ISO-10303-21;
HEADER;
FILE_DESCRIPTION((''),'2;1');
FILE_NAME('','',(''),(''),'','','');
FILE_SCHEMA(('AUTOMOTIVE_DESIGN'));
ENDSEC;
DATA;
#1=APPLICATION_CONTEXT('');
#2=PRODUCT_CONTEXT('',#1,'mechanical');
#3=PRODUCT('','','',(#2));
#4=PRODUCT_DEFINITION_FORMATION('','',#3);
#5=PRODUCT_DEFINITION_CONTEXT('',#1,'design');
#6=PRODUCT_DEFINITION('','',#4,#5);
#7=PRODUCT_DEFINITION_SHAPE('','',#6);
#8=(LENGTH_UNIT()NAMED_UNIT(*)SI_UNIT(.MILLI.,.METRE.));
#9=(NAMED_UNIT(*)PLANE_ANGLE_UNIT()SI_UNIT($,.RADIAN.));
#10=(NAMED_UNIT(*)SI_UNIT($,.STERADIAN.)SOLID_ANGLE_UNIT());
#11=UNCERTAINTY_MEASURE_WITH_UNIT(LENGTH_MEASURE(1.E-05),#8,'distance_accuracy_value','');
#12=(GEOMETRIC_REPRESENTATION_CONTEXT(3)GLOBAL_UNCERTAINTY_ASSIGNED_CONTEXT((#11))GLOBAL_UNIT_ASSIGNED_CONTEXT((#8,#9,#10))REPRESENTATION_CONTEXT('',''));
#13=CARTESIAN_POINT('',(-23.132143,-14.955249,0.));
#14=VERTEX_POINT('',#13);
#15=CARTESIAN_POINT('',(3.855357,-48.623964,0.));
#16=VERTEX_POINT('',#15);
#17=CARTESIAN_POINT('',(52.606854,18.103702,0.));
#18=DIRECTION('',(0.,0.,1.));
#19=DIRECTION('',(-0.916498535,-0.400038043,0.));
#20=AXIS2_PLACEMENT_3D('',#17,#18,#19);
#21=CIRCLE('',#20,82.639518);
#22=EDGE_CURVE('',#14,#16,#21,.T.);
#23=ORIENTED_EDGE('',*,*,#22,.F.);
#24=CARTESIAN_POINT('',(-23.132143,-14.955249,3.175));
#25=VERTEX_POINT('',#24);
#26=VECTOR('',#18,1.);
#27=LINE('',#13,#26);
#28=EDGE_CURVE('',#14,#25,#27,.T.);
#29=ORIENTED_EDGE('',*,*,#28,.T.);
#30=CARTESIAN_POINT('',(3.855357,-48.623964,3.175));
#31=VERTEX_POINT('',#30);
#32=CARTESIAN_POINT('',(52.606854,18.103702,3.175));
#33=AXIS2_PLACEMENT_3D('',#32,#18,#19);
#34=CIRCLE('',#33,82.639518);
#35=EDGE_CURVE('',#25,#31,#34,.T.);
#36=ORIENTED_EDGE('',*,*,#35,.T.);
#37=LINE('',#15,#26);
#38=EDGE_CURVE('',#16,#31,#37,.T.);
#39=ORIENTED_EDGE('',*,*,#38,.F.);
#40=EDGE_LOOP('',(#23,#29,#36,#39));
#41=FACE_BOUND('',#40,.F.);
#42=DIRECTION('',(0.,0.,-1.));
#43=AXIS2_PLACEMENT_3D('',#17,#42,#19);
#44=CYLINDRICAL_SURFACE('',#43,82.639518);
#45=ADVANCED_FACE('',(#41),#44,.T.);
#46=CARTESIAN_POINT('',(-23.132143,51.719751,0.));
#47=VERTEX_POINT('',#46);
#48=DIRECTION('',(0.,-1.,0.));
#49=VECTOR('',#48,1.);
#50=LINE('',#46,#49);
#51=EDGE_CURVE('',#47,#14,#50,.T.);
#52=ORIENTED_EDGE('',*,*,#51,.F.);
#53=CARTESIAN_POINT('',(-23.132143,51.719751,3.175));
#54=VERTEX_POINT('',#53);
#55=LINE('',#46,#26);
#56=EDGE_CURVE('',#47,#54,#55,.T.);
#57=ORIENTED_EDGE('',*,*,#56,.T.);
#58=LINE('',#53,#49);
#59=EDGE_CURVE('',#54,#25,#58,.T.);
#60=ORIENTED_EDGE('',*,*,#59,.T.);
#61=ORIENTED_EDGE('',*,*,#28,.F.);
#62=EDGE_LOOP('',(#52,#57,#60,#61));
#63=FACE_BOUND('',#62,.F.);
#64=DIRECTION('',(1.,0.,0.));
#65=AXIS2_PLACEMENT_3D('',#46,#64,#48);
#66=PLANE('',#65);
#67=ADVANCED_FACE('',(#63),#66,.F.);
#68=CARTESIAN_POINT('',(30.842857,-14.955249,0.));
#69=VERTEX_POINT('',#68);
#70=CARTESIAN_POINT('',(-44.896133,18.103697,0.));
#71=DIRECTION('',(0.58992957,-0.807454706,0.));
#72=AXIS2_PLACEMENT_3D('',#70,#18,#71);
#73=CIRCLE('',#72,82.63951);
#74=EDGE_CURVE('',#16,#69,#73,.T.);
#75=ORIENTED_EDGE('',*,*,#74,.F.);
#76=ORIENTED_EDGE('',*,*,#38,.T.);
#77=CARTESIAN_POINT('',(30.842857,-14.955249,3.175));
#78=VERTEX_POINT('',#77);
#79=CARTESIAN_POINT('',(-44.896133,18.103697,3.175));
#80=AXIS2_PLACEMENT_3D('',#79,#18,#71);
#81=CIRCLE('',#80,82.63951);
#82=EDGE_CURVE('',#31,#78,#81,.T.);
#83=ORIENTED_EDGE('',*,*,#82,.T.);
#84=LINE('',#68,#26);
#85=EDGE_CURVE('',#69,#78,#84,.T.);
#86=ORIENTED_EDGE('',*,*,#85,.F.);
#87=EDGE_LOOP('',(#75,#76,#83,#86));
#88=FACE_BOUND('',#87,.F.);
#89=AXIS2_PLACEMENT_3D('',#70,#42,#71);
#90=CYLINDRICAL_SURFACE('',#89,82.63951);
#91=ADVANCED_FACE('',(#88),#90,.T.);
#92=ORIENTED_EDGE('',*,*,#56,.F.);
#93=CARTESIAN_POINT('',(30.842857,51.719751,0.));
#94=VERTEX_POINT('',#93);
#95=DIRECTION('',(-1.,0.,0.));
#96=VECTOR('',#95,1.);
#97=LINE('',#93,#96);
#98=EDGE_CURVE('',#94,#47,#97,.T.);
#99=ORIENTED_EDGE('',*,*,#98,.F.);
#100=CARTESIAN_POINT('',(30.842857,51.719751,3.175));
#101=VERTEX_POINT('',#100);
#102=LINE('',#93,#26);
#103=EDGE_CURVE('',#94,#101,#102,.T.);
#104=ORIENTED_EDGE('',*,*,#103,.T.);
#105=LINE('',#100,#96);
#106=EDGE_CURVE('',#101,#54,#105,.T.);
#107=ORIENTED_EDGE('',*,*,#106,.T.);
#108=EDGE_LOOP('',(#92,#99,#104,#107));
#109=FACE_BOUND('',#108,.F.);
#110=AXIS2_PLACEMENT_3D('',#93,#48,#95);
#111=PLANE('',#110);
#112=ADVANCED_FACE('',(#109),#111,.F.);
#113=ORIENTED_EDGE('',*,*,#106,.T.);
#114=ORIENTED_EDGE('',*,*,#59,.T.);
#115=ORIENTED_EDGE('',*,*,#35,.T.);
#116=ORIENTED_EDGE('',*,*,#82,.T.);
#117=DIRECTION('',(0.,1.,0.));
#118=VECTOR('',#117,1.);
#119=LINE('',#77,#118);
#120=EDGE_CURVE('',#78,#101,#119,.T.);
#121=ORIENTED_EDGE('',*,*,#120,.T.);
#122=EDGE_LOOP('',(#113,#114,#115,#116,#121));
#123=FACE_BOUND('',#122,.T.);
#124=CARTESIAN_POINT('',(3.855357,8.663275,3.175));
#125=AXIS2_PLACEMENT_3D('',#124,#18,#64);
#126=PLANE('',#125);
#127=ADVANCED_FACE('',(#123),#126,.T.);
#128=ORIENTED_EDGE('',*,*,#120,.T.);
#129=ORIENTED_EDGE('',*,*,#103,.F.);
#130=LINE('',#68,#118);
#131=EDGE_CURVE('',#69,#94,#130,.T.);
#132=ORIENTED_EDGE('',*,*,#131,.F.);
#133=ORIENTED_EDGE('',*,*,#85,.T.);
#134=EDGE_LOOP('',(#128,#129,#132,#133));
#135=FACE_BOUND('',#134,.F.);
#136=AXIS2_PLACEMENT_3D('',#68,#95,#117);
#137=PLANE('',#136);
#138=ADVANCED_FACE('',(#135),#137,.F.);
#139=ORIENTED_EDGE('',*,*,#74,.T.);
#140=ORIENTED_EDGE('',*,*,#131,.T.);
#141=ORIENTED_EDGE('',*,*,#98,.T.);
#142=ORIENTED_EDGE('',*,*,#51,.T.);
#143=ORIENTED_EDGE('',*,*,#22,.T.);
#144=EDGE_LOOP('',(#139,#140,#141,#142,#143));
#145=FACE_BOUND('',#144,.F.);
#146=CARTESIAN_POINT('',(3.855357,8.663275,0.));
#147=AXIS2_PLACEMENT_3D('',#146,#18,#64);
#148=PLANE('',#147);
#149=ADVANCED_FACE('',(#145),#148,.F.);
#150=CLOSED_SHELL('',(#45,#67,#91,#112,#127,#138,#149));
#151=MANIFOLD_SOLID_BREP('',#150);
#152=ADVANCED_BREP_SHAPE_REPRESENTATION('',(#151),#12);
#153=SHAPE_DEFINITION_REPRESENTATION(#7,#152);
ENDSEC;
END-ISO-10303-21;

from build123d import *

# Parameters (mm, degrees)
F1_DEPTH = 3.175


# Not quite as in the source:
# - a length typed as a fraction of an inch, garbled in the dataset ("3 / 203.2 mm" for 3/8 in), is restored


with BuildPart() as f1:
    # F0 (on Top) → F1 (new body)
    with BuildSketch(Plane.XY):
        with BuildLine():
            Line((30.8428571429, 51.7197510952), (-23.1321428571, 51.7197510952))
            Line((-23.1321428571, 51.7197510952), (-23.1321428571, -14.9552489048))
            ThreePointArc((-23.1321428571, -14.9552489048), (-11.8746654703, -33.5821135274), (3.8553571429, -48.6239641905))
            ThreePointArc((3.8553571429, -48.6239641905), (19.5853799846, -33.5821137106), (30.8428571429, -14.9552489048))
            Line((30.8428571429, -14.9552489048), (30.8428571429, 51.7197510952))
        make_face()
    extrude(amount=F1_DEPTH)


solid = f1.part
